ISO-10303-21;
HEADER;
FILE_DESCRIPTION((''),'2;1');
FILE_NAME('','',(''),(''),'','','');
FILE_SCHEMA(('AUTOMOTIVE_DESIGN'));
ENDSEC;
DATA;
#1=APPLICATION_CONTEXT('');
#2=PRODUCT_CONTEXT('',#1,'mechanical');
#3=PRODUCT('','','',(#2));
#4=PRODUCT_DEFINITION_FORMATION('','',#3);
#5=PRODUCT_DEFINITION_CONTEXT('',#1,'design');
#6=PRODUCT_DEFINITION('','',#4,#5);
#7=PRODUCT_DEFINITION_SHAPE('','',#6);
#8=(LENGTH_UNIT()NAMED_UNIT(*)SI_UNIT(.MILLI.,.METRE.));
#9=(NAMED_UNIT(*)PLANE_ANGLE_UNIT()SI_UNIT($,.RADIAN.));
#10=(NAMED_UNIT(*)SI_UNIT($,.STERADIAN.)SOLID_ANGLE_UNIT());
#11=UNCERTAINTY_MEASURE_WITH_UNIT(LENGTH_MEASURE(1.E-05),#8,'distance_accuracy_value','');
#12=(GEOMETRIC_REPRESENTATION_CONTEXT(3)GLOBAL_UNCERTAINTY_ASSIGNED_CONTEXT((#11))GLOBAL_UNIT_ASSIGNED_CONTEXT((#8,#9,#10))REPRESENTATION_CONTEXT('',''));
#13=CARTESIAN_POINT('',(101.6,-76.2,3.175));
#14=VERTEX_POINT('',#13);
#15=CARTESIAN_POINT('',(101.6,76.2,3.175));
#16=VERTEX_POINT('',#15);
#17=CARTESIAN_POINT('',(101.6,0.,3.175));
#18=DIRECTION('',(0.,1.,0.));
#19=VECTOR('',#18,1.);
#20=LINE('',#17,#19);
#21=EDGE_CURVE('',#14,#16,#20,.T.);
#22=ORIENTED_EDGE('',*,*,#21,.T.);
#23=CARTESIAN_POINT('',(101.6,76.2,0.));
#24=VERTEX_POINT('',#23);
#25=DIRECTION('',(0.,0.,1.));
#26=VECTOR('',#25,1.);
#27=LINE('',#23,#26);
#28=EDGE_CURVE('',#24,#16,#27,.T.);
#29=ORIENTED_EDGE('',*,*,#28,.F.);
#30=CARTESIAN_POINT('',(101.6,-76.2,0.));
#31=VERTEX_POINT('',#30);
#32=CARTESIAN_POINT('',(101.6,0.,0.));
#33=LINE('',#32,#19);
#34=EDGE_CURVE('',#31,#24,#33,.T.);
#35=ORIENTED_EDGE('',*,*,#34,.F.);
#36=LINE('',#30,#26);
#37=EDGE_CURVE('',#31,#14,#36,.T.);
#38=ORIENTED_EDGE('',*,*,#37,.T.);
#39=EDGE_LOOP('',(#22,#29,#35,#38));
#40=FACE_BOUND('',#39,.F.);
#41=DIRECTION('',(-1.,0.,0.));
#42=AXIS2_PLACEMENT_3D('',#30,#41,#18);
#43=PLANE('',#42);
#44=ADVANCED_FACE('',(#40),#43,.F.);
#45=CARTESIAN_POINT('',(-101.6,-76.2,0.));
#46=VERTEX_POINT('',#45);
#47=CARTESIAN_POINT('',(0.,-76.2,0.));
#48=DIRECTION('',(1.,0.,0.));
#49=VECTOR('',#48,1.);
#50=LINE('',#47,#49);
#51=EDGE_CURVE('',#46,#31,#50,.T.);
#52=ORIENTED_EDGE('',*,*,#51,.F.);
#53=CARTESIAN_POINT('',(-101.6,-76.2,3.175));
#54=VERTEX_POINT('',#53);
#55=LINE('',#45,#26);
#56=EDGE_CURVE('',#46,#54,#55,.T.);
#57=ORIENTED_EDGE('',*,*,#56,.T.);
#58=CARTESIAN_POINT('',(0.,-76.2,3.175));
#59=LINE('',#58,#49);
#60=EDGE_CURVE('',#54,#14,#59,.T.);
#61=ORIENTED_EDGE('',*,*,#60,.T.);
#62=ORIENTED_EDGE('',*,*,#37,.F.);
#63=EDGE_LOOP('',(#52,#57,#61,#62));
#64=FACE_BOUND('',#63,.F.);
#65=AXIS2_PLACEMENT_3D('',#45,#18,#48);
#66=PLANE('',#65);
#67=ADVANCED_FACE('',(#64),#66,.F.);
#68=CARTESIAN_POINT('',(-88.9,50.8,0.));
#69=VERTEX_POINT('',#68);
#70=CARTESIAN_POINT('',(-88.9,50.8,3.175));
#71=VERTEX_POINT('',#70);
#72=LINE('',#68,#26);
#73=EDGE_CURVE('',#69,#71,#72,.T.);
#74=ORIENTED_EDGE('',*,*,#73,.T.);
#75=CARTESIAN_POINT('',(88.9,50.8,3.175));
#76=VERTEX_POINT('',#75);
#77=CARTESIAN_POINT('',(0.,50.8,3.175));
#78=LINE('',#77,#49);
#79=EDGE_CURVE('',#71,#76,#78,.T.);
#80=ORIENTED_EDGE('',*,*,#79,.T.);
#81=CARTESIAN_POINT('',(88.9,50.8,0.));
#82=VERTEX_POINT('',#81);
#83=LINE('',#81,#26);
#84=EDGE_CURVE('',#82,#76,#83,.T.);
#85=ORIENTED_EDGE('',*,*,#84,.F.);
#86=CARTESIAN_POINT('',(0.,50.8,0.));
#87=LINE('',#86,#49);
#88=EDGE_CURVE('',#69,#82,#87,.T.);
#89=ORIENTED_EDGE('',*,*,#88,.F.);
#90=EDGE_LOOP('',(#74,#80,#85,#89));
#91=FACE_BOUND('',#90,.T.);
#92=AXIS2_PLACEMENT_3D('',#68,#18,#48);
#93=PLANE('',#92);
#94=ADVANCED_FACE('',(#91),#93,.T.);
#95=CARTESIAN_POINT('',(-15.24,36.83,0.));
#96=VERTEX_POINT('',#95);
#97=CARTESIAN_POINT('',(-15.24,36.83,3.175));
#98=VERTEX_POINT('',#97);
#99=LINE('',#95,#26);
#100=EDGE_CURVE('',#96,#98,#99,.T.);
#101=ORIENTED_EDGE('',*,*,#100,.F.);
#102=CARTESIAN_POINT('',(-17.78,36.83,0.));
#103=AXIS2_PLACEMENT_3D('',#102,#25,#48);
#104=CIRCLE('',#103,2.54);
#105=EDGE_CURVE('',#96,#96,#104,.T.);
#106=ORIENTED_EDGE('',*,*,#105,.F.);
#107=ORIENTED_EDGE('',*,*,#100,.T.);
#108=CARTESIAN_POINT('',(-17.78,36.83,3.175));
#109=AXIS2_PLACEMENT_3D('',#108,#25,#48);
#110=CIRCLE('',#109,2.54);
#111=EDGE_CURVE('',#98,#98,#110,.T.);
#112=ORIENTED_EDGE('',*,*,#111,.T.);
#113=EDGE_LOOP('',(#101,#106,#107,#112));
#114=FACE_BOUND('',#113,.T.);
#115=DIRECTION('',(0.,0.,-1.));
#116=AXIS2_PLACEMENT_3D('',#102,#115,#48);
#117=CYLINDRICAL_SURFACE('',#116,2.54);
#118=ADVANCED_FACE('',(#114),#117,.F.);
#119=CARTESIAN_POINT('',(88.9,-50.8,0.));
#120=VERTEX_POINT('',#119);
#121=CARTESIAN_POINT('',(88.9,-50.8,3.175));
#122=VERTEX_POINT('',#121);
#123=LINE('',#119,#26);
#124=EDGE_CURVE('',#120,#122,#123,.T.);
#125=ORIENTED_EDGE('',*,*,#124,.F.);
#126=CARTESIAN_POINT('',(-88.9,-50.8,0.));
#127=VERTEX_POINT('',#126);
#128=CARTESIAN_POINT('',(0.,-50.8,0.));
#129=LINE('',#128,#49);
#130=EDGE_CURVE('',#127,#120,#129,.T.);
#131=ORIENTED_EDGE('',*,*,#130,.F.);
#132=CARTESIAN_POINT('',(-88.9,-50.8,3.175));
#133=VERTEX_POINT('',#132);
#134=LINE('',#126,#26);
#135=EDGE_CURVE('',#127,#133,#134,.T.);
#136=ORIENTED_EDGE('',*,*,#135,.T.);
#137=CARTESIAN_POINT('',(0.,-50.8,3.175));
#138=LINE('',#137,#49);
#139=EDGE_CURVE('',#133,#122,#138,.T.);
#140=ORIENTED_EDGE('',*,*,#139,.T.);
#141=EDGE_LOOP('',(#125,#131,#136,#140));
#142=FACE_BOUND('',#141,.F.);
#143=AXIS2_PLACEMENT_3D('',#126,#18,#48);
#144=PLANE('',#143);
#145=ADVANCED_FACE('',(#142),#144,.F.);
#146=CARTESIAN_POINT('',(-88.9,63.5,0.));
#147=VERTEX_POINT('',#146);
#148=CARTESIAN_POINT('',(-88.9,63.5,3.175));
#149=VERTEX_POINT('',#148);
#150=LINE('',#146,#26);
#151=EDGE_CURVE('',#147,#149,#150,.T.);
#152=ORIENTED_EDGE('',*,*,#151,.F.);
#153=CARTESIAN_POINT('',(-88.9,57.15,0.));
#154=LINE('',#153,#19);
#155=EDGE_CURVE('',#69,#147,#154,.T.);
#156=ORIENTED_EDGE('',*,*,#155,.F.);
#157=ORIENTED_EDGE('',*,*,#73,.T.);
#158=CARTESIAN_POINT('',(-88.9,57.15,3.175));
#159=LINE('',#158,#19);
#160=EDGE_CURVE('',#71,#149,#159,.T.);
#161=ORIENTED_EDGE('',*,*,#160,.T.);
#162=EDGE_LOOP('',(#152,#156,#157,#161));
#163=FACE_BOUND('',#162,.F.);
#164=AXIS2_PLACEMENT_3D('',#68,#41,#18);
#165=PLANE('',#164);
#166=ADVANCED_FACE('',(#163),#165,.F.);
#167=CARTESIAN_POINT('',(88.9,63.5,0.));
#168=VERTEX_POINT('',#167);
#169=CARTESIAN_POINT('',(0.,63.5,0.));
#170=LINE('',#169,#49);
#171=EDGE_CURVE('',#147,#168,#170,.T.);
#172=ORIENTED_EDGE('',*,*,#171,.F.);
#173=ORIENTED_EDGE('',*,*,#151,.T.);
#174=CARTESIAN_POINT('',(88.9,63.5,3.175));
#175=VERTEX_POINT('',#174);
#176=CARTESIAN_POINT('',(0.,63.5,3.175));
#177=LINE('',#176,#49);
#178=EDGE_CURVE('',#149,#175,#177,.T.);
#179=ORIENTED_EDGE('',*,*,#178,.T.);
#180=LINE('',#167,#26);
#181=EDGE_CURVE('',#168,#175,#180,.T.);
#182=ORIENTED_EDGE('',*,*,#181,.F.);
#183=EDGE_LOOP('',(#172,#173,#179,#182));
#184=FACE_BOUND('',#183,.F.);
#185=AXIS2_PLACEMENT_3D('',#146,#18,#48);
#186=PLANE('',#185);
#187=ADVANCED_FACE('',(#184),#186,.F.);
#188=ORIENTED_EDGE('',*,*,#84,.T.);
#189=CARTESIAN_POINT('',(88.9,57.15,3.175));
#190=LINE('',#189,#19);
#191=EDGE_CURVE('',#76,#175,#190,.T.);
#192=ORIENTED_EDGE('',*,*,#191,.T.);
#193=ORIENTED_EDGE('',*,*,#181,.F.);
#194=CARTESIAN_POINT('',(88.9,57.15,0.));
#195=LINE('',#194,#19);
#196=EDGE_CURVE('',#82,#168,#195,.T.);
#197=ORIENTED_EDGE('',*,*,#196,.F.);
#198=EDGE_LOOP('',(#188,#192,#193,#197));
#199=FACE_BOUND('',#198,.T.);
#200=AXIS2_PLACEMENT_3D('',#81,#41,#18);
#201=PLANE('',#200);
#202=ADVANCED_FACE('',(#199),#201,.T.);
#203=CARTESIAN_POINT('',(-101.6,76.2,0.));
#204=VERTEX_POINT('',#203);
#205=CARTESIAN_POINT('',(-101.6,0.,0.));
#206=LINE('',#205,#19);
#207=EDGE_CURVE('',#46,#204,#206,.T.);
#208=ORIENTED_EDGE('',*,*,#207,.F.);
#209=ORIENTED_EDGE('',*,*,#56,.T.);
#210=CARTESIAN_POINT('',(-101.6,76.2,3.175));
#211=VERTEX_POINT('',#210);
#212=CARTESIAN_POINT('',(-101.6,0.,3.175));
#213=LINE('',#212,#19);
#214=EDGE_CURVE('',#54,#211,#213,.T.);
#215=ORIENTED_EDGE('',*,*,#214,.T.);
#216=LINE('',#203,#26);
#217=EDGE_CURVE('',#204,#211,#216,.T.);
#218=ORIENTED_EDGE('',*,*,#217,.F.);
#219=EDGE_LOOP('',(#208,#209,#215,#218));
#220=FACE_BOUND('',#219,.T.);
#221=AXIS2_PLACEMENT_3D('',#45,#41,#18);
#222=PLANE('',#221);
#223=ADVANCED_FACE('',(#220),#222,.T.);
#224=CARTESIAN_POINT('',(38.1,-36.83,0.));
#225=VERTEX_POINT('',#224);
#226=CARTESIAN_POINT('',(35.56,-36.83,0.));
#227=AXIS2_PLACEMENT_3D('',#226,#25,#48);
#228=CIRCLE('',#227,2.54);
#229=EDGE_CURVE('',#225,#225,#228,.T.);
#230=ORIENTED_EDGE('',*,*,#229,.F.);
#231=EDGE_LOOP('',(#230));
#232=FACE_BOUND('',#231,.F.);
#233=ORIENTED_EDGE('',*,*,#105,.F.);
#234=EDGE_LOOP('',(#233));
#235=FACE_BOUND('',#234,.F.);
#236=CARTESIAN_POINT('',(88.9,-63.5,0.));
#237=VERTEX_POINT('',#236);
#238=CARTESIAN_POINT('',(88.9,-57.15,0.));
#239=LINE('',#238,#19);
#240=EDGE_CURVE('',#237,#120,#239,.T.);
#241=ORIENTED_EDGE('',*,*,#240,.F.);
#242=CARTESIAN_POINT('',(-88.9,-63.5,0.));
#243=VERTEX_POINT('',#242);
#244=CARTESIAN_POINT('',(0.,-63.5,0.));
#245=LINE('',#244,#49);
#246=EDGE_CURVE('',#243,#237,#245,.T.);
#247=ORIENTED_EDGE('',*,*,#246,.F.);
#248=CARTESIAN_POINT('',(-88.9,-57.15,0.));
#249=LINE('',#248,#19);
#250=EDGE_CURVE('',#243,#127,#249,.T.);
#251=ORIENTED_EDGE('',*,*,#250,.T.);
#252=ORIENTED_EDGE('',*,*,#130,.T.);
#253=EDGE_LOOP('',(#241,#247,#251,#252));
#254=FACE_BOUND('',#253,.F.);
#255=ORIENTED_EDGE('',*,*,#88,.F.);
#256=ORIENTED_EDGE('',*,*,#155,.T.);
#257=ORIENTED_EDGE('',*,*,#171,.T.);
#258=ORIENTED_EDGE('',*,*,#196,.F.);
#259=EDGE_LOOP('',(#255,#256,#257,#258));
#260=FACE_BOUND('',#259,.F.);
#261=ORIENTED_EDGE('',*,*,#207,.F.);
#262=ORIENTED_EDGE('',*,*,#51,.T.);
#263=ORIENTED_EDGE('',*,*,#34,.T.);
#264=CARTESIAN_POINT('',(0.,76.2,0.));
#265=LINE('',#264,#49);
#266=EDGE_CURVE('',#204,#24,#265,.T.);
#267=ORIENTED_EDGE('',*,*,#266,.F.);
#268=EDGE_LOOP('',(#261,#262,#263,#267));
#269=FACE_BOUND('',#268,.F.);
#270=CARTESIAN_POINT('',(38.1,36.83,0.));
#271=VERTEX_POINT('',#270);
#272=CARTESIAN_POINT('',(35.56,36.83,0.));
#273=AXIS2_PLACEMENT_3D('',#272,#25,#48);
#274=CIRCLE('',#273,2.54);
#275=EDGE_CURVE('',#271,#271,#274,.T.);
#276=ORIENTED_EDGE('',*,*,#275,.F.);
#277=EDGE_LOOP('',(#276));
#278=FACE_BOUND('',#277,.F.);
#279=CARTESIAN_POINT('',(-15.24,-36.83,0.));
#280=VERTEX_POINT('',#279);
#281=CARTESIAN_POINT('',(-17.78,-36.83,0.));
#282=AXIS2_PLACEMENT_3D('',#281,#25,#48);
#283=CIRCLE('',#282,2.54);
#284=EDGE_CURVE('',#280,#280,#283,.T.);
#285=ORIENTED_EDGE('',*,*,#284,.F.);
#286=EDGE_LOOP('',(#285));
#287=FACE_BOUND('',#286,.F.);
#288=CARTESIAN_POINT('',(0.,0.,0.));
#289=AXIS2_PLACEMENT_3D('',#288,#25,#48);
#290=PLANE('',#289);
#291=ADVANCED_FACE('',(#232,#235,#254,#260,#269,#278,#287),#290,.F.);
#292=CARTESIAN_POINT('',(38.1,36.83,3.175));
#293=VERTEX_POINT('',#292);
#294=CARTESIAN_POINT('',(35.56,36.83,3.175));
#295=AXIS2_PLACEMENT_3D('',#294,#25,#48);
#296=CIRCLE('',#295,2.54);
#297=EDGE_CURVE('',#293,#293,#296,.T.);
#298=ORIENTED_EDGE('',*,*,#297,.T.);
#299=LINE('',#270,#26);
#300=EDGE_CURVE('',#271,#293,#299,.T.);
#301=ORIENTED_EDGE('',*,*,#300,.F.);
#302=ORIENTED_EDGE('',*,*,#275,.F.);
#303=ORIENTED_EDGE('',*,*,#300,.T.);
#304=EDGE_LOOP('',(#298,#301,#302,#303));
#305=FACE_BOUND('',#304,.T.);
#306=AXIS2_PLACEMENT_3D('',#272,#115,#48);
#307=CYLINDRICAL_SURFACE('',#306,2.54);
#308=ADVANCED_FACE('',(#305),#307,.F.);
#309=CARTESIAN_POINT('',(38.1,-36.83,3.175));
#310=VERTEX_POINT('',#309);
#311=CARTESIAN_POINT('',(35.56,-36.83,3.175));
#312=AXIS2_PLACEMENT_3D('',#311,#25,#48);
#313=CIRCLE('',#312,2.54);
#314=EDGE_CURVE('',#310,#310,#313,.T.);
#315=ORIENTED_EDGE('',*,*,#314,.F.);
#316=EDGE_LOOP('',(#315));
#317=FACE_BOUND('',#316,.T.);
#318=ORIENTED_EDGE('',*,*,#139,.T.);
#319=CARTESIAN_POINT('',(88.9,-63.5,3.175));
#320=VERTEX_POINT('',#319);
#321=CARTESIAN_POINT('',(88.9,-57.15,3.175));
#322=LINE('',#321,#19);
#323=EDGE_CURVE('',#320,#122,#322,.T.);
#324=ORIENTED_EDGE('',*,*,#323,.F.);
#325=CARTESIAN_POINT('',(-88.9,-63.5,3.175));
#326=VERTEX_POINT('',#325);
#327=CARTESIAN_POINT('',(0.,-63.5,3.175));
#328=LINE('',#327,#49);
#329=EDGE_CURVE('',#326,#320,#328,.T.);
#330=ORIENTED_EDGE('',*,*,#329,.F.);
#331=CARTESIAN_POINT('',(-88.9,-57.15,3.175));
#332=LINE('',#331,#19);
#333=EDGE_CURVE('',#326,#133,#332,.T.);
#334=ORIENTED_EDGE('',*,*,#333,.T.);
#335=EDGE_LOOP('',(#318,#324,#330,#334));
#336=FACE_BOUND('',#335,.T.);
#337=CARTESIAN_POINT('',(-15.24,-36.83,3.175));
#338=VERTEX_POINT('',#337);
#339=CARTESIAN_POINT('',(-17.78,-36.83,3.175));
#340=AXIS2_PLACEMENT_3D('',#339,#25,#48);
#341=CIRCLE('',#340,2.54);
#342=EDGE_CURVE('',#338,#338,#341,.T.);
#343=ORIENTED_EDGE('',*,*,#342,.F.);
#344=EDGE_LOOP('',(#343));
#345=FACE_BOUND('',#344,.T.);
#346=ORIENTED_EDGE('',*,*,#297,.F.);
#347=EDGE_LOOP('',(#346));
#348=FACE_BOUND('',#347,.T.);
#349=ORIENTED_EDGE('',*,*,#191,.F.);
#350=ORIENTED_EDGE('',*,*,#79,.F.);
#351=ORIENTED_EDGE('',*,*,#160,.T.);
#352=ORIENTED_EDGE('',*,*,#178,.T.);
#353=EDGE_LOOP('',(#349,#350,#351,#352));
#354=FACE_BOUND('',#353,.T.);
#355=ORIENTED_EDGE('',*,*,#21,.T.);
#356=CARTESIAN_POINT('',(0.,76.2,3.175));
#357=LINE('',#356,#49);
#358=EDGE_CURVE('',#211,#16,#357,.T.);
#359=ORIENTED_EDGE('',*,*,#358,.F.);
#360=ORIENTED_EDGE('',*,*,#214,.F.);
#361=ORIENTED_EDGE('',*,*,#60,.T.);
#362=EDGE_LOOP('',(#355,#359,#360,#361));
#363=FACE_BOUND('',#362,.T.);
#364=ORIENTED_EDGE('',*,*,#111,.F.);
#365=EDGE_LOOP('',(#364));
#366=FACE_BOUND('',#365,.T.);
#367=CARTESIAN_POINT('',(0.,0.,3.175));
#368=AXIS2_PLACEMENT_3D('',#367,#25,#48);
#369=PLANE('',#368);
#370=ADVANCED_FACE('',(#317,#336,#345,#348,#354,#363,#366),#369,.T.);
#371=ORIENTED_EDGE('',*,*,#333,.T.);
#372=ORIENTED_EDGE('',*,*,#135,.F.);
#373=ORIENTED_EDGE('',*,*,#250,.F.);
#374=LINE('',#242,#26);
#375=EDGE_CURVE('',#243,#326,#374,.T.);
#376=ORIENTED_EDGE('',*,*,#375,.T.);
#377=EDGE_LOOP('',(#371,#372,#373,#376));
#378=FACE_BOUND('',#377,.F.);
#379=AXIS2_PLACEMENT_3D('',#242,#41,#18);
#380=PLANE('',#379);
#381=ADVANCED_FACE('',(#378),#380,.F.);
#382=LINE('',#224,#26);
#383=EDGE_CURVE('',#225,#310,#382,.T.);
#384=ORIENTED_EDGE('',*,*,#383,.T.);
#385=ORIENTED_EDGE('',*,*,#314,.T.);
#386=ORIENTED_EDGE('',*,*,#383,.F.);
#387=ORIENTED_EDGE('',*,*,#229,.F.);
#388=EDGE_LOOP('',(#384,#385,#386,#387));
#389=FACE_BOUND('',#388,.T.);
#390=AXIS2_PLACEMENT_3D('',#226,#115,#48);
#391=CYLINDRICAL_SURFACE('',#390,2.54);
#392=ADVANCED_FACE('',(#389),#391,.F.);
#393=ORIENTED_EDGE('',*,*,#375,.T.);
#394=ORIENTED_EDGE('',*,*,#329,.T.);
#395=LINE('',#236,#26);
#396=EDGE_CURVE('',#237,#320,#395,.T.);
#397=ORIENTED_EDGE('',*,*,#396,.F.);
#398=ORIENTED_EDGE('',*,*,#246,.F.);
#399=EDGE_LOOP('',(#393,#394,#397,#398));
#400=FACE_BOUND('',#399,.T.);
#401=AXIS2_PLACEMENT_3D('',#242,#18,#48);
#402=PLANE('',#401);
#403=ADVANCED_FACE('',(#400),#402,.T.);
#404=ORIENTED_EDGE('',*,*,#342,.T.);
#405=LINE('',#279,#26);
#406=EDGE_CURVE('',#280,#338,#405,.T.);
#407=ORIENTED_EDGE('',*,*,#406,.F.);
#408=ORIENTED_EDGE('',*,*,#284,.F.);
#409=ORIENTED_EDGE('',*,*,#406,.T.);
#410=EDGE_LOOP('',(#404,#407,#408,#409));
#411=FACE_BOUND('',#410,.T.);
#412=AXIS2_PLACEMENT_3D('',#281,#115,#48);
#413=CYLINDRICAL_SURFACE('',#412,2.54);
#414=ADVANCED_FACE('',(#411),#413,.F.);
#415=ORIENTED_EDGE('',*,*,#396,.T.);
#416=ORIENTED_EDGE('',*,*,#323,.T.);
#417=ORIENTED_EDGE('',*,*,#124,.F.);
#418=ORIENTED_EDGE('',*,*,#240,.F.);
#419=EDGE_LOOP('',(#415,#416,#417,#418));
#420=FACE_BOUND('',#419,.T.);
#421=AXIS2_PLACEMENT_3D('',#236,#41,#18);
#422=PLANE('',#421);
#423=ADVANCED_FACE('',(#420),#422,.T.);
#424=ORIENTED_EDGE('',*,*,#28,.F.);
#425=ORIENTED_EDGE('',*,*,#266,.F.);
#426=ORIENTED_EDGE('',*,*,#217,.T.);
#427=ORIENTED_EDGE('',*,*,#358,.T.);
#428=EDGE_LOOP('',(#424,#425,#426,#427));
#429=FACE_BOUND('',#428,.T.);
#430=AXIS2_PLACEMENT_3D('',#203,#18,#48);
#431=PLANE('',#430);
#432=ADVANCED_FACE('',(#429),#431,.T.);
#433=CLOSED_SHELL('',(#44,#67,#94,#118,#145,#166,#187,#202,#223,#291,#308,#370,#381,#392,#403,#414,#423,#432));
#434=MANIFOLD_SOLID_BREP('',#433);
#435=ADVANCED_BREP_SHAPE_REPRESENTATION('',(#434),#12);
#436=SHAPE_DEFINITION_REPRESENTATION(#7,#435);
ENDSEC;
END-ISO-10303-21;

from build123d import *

# Parameters (mm, degrees)
F0_W     = 203.2
F0_H     = 152.4
F0_W_2   = 177.8
F0_H_2   = 12.7
F0_R     = 2.54
F1_DEPTH = 3.175


# Not quite as in the source:
# - a length typed as a fraction of an inch, garbled in the dataset ("3 / 203.2 mm" for 3/8 in), is restored
# - a feature names something its author has since deleted; it is built from what else it names


with BuildPart() as f1:
    # F0 (on Top) → F1 (new body)
    with BuildSketch(Plane.XY):
        Rectangle(F0_W, F0_H)
        with Locations((0, -57.15)):
            Rectangle(F0_W_2, F0_H_2, mode=Mode.SUBTRACT)
        with Locations((-17.78, -36.83)):
            Circle(F0_R, mode=Mode.SUBTRACT)
        with Locations((35.56, -36.83)):
            Circle(F0_R, mode=Mode.SUBTRACT)
        with Locations((-17.78, 36.83)):
            Circle(F0_R, mode=Mode.SUBTRACT)
        with Locations((0, 57.15)):
            Rectangle(F0_W_2, F0_H_2, mode=Mode.SUBTRACT)
        with Locations((35.56, 36.83)):
            Circle(F0_R, mode=Mode.SUBTRACT)
    extrude(amount=F1_DEPTH)


solid = f1.part
